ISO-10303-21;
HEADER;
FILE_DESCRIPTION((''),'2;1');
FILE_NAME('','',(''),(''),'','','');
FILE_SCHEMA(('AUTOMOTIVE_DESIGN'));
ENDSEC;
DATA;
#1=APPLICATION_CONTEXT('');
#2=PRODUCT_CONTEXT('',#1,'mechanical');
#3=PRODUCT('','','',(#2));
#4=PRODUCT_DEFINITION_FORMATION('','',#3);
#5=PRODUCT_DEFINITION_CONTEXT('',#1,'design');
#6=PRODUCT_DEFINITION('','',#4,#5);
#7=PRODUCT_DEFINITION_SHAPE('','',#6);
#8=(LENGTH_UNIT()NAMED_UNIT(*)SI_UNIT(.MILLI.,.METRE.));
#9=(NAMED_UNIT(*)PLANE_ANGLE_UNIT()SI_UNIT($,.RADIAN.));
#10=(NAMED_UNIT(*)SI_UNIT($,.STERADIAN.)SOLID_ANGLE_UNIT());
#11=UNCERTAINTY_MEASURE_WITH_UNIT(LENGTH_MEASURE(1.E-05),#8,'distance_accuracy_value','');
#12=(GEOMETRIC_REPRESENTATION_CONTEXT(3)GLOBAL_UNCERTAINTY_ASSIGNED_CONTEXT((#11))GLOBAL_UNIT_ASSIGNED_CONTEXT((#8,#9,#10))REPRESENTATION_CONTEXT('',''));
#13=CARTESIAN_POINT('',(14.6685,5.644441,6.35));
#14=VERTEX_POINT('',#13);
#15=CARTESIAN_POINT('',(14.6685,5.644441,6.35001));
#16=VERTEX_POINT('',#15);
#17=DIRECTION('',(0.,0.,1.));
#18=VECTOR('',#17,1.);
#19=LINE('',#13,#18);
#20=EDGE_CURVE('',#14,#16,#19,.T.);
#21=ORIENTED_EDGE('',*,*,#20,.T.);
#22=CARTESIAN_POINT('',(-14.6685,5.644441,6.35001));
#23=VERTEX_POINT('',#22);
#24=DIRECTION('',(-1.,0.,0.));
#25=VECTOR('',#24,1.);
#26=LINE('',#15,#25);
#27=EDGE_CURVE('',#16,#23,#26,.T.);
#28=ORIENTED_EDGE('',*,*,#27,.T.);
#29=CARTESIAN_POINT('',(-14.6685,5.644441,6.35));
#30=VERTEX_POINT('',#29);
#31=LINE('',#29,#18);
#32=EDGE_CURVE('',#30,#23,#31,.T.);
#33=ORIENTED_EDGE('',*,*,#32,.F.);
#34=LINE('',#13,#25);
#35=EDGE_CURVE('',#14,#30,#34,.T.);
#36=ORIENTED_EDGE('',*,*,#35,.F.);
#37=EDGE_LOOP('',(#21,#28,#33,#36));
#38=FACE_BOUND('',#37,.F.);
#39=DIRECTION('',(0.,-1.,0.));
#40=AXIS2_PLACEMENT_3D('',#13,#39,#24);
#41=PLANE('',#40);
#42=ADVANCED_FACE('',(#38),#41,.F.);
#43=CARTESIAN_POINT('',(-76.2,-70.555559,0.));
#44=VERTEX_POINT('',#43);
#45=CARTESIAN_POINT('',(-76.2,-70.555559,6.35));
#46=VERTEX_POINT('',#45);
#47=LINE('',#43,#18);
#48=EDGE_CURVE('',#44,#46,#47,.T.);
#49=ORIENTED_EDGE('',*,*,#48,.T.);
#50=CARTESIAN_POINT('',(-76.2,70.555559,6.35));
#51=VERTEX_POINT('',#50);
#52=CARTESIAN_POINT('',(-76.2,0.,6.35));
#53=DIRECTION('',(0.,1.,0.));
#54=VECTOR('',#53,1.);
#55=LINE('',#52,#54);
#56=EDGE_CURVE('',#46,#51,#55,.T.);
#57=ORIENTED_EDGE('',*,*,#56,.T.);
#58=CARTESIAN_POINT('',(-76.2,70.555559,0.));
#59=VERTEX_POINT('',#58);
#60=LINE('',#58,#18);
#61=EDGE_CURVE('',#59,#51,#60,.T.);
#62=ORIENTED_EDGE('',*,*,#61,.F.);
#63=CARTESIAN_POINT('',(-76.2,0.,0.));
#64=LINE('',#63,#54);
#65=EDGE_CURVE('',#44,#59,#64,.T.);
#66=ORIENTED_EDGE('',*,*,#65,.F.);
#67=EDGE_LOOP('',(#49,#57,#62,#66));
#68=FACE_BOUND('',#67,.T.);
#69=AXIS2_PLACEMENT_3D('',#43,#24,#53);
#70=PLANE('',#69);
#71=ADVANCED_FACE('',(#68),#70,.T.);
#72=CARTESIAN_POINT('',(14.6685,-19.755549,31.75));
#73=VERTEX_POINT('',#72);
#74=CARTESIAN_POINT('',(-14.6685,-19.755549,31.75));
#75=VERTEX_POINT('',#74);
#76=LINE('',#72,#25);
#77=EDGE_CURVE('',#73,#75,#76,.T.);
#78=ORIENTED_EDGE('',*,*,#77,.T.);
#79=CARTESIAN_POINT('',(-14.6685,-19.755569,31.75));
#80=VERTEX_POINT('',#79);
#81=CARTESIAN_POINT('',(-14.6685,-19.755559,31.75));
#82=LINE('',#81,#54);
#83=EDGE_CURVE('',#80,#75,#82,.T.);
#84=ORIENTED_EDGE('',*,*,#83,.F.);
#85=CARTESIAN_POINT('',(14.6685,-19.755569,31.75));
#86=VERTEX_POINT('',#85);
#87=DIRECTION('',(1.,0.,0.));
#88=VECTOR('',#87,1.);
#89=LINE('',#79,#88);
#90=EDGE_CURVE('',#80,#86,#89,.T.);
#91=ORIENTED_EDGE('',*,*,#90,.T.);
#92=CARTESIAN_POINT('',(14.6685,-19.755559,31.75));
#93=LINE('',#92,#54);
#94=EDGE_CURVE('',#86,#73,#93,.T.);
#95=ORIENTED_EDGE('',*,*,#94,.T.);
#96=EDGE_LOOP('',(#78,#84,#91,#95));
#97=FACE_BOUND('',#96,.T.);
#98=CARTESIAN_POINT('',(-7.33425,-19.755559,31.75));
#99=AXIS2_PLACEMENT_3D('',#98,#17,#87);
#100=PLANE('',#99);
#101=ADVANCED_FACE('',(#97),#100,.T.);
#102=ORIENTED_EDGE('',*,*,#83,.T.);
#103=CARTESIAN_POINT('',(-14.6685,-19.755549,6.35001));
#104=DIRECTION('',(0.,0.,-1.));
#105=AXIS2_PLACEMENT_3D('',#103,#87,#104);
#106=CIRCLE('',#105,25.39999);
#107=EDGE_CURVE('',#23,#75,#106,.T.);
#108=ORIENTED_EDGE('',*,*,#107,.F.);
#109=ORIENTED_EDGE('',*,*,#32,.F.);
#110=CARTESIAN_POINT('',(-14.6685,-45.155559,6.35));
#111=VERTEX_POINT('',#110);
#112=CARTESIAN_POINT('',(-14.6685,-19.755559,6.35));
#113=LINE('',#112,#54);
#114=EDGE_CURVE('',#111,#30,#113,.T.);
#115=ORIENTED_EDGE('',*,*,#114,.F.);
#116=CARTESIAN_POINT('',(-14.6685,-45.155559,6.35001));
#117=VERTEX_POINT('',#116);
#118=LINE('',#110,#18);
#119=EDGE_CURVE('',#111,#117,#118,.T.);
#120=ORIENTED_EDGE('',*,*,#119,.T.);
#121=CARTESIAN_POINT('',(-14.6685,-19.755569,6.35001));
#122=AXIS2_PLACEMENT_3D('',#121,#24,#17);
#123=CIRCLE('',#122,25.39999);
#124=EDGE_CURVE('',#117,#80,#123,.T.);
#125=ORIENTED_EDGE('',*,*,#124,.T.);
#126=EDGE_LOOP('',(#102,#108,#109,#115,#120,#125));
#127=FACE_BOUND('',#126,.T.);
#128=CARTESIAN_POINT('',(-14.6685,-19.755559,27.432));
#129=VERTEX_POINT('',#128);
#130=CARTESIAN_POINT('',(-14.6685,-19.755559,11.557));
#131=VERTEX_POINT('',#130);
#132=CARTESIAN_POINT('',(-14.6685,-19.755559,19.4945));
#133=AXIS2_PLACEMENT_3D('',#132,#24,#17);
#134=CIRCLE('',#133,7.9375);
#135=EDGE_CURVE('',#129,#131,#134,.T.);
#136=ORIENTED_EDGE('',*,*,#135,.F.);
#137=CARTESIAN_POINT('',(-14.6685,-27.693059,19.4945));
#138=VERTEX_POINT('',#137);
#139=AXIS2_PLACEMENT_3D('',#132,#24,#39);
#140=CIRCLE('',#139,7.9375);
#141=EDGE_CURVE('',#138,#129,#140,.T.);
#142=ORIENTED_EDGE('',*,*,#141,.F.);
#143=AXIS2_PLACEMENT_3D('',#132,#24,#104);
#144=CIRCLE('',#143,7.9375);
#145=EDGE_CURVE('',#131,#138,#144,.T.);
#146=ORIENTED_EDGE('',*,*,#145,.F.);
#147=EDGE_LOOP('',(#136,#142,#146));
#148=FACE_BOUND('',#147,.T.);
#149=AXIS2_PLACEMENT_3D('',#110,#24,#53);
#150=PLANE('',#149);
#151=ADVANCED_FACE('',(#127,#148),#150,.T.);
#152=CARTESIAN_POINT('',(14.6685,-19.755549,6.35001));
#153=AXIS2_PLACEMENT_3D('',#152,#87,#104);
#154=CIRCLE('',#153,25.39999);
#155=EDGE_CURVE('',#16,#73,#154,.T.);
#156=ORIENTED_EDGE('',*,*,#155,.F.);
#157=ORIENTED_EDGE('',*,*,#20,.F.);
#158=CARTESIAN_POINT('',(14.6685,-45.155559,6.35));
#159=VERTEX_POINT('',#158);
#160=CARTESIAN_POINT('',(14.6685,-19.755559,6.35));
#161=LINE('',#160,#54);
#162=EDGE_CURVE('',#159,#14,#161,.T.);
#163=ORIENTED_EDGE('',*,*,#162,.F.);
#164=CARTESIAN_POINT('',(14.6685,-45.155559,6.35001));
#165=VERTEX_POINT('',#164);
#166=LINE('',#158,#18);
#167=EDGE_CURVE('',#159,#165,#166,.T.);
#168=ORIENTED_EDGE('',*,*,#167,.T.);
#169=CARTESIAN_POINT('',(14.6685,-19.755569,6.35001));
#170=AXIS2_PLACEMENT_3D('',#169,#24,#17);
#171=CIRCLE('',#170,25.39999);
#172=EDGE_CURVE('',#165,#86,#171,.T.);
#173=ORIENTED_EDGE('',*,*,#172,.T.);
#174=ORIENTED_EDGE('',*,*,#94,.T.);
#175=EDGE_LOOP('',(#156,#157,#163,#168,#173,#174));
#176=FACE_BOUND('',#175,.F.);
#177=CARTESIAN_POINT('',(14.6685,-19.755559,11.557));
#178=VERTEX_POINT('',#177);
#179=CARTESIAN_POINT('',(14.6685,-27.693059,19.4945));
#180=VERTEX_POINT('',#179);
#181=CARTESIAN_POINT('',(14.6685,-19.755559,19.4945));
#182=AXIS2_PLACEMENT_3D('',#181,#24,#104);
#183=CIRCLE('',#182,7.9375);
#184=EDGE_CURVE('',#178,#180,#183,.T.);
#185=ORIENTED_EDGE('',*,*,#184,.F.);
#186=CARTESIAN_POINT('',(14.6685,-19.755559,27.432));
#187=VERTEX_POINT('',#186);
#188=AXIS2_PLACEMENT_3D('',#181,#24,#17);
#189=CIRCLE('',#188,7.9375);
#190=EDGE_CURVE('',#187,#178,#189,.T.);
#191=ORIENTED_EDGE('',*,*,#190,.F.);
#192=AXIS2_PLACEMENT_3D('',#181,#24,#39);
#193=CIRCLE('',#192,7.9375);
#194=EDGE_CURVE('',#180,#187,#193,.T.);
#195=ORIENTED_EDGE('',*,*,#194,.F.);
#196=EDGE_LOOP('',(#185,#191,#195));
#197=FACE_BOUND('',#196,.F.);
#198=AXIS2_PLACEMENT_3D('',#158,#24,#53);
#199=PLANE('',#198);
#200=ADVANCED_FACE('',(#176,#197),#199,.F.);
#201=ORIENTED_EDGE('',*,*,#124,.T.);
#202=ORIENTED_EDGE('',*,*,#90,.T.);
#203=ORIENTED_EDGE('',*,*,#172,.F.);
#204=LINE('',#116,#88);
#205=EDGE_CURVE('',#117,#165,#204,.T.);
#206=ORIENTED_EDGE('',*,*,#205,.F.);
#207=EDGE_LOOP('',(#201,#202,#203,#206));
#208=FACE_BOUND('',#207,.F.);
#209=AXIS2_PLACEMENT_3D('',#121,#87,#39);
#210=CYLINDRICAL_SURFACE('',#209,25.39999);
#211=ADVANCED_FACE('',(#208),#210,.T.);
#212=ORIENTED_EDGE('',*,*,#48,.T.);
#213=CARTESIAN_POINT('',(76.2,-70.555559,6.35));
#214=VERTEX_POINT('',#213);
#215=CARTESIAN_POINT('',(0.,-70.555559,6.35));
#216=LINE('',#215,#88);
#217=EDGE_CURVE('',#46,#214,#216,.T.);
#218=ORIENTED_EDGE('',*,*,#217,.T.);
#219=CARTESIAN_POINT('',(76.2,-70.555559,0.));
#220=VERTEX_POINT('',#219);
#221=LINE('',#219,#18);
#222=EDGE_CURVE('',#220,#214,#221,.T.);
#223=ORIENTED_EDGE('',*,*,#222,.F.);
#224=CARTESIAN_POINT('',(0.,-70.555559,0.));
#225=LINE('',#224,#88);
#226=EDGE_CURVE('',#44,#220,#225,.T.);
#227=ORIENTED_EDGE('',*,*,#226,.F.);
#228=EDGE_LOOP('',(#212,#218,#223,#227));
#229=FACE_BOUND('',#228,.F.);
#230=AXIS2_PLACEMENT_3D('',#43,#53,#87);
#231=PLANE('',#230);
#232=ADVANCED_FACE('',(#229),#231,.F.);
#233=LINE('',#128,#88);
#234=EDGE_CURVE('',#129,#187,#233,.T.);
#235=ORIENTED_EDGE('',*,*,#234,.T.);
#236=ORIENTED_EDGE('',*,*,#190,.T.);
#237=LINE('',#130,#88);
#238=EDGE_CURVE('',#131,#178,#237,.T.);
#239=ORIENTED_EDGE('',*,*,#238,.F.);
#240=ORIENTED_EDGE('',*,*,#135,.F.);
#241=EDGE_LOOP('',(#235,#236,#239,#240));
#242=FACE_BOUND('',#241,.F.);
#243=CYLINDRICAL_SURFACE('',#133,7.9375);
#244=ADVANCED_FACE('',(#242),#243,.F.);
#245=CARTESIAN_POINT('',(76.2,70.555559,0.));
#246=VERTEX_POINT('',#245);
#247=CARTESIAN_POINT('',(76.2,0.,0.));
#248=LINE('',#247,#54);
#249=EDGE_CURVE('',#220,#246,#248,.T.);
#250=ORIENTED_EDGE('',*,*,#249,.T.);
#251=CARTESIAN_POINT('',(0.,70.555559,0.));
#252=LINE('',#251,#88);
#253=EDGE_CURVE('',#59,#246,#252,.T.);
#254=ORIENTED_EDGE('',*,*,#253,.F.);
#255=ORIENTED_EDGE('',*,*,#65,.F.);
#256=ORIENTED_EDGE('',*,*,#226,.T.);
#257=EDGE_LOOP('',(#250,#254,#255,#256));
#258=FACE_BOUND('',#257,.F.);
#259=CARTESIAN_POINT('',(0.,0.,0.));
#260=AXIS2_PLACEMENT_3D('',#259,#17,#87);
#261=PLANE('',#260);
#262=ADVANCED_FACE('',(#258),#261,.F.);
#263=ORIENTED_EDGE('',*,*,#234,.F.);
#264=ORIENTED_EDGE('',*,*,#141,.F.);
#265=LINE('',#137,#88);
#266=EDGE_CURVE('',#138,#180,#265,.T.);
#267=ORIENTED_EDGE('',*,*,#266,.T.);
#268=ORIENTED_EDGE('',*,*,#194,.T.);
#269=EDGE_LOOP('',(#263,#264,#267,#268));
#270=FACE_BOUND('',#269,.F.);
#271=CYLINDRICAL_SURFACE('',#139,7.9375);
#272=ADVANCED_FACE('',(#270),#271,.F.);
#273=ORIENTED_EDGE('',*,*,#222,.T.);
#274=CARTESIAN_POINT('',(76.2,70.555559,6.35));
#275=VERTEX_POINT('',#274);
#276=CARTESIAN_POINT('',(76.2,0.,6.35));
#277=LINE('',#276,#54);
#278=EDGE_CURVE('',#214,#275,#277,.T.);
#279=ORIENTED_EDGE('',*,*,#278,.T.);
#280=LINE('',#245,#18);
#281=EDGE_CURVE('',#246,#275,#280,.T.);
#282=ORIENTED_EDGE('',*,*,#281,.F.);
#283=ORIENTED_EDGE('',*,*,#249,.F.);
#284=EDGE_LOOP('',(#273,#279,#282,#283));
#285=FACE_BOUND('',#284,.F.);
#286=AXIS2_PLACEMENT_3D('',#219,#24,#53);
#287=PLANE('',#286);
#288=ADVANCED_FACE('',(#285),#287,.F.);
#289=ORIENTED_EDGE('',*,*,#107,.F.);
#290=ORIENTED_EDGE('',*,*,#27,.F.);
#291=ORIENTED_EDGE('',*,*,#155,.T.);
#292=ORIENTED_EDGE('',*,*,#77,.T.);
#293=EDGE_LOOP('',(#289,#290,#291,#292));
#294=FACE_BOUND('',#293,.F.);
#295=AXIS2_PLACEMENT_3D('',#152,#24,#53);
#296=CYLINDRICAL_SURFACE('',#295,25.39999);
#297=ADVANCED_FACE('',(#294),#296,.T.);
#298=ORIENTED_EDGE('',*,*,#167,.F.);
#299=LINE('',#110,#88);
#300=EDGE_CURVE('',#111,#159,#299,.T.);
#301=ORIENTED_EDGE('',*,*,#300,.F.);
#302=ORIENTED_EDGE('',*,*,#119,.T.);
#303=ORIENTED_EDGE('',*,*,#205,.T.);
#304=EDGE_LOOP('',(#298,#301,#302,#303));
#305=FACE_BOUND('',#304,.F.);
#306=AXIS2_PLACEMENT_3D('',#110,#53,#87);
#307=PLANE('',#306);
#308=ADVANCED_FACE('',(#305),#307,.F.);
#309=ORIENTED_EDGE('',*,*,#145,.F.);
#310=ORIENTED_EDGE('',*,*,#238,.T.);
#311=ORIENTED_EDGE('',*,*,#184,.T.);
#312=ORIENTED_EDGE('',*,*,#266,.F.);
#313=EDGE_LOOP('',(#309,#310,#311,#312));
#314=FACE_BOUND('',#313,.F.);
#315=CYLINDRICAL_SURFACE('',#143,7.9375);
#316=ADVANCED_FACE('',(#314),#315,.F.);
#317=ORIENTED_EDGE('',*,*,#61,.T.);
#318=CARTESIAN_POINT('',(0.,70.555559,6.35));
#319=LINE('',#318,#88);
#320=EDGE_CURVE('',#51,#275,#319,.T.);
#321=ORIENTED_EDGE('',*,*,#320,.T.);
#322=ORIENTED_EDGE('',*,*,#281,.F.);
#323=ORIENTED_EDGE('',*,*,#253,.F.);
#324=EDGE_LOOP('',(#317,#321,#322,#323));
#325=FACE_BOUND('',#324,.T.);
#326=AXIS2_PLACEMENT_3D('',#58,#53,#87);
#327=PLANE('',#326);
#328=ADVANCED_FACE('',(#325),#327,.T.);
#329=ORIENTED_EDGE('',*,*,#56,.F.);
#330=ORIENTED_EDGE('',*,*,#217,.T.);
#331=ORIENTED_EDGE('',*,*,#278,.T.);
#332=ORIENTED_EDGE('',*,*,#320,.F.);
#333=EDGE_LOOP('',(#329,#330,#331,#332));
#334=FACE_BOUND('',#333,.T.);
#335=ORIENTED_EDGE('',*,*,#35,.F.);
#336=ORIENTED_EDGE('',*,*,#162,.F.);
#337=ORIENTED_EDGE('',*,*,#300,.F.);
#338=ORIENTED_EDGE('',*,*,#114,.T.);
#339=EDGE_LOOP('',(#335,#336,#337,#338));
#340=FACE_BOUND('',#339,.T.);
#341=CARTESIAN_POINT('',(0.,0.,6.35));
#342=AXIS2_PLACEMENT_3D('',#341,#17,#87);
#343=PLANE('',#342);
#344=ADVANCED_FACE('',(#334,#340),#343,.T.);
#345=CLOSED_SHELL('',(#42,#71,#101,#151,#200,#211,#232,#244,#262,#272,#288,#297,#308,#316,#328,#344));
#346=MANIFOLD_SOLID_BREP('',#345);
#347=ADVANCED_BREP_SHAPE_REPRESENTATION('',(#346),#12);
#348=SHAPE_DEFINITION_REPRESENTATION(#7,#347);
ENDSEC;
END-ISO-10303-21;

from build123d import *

# Parameters (mm, degrees)
F0_W     = 152.4
F0_H     = 141.1111171471
F1_DEPTH = 6.35
F2_W     = 14.6685
F2_H     = 50.8
F3_DEPTH = 25.4
F4_R     = 25.39999
F6_DEPTH = 76.2


# Not quite as in the source:
# - a fillet or chamfer is up to 0.001 mm smaller than in the source, because OpenCascade refuses the exact size


with BuildPart() as f1:
    # F0 (on Top) → F1 (new body)
    with BuildSketch(Plane.XY):
        Rectangle(F0_W, F0_H)
    extrude(amount=F1_DEPTH)

    # F2 (on face) → F3 (join)
    with BuildSketch(Plane.XY.offset(6.35)):
        with Locations((-7.33425, -19.7555585735)):
            Rectangle(F2_W, F2_H)
        with Locations((7.33425, -19.7555585735)):
            Rectangle(F2_W, F2_H)
    extrude(amount=F3_DEPTH)

    # F4 (radius 25.4 in the source; OpenCascade refuses exactly that, so slightly less here)
    f4_edges = [f1.edges().sort_by_distance(p)[0] for p in [
        (0, 5.644441, 31.75),
        (0, -45.155559, 31.75),
    ]]
    fillet(f4_edges, radius=F4_R)

    # F5 (on face) → F6 (cut)
    with BuildSketch(Plane(origin=(-14.6685, 0, 0), x_dir=(0, -1, 0), z_dir=(-1, 0, 0))):
        with BuildLine():
            Line((19.7555585735, 11.557), (19.7555585735, 27.432))
            ThreePointArc((19.7555585735, 27.432), (11.8180585735, 19.4945), (19.7555585735, 11.557))
        make_face()
        with BuildLine():
            ThreePointArc((27.6930585735, 19.4945), (25.3682186492, 25.1071600757), (19.7555585735, 27.432))
            Line((19.7555585735, 27.432), (19.7555585735, 11.557))
            ThreePointArc((19.7555585735, 11.557), (25.3682186492, 13.8818399243), (27.6930585735, 19.4945))
        make_face()
    extrude(amount=-F6_DEPTH, mode=Mode.SUBTRACT)


solid = f1.part
